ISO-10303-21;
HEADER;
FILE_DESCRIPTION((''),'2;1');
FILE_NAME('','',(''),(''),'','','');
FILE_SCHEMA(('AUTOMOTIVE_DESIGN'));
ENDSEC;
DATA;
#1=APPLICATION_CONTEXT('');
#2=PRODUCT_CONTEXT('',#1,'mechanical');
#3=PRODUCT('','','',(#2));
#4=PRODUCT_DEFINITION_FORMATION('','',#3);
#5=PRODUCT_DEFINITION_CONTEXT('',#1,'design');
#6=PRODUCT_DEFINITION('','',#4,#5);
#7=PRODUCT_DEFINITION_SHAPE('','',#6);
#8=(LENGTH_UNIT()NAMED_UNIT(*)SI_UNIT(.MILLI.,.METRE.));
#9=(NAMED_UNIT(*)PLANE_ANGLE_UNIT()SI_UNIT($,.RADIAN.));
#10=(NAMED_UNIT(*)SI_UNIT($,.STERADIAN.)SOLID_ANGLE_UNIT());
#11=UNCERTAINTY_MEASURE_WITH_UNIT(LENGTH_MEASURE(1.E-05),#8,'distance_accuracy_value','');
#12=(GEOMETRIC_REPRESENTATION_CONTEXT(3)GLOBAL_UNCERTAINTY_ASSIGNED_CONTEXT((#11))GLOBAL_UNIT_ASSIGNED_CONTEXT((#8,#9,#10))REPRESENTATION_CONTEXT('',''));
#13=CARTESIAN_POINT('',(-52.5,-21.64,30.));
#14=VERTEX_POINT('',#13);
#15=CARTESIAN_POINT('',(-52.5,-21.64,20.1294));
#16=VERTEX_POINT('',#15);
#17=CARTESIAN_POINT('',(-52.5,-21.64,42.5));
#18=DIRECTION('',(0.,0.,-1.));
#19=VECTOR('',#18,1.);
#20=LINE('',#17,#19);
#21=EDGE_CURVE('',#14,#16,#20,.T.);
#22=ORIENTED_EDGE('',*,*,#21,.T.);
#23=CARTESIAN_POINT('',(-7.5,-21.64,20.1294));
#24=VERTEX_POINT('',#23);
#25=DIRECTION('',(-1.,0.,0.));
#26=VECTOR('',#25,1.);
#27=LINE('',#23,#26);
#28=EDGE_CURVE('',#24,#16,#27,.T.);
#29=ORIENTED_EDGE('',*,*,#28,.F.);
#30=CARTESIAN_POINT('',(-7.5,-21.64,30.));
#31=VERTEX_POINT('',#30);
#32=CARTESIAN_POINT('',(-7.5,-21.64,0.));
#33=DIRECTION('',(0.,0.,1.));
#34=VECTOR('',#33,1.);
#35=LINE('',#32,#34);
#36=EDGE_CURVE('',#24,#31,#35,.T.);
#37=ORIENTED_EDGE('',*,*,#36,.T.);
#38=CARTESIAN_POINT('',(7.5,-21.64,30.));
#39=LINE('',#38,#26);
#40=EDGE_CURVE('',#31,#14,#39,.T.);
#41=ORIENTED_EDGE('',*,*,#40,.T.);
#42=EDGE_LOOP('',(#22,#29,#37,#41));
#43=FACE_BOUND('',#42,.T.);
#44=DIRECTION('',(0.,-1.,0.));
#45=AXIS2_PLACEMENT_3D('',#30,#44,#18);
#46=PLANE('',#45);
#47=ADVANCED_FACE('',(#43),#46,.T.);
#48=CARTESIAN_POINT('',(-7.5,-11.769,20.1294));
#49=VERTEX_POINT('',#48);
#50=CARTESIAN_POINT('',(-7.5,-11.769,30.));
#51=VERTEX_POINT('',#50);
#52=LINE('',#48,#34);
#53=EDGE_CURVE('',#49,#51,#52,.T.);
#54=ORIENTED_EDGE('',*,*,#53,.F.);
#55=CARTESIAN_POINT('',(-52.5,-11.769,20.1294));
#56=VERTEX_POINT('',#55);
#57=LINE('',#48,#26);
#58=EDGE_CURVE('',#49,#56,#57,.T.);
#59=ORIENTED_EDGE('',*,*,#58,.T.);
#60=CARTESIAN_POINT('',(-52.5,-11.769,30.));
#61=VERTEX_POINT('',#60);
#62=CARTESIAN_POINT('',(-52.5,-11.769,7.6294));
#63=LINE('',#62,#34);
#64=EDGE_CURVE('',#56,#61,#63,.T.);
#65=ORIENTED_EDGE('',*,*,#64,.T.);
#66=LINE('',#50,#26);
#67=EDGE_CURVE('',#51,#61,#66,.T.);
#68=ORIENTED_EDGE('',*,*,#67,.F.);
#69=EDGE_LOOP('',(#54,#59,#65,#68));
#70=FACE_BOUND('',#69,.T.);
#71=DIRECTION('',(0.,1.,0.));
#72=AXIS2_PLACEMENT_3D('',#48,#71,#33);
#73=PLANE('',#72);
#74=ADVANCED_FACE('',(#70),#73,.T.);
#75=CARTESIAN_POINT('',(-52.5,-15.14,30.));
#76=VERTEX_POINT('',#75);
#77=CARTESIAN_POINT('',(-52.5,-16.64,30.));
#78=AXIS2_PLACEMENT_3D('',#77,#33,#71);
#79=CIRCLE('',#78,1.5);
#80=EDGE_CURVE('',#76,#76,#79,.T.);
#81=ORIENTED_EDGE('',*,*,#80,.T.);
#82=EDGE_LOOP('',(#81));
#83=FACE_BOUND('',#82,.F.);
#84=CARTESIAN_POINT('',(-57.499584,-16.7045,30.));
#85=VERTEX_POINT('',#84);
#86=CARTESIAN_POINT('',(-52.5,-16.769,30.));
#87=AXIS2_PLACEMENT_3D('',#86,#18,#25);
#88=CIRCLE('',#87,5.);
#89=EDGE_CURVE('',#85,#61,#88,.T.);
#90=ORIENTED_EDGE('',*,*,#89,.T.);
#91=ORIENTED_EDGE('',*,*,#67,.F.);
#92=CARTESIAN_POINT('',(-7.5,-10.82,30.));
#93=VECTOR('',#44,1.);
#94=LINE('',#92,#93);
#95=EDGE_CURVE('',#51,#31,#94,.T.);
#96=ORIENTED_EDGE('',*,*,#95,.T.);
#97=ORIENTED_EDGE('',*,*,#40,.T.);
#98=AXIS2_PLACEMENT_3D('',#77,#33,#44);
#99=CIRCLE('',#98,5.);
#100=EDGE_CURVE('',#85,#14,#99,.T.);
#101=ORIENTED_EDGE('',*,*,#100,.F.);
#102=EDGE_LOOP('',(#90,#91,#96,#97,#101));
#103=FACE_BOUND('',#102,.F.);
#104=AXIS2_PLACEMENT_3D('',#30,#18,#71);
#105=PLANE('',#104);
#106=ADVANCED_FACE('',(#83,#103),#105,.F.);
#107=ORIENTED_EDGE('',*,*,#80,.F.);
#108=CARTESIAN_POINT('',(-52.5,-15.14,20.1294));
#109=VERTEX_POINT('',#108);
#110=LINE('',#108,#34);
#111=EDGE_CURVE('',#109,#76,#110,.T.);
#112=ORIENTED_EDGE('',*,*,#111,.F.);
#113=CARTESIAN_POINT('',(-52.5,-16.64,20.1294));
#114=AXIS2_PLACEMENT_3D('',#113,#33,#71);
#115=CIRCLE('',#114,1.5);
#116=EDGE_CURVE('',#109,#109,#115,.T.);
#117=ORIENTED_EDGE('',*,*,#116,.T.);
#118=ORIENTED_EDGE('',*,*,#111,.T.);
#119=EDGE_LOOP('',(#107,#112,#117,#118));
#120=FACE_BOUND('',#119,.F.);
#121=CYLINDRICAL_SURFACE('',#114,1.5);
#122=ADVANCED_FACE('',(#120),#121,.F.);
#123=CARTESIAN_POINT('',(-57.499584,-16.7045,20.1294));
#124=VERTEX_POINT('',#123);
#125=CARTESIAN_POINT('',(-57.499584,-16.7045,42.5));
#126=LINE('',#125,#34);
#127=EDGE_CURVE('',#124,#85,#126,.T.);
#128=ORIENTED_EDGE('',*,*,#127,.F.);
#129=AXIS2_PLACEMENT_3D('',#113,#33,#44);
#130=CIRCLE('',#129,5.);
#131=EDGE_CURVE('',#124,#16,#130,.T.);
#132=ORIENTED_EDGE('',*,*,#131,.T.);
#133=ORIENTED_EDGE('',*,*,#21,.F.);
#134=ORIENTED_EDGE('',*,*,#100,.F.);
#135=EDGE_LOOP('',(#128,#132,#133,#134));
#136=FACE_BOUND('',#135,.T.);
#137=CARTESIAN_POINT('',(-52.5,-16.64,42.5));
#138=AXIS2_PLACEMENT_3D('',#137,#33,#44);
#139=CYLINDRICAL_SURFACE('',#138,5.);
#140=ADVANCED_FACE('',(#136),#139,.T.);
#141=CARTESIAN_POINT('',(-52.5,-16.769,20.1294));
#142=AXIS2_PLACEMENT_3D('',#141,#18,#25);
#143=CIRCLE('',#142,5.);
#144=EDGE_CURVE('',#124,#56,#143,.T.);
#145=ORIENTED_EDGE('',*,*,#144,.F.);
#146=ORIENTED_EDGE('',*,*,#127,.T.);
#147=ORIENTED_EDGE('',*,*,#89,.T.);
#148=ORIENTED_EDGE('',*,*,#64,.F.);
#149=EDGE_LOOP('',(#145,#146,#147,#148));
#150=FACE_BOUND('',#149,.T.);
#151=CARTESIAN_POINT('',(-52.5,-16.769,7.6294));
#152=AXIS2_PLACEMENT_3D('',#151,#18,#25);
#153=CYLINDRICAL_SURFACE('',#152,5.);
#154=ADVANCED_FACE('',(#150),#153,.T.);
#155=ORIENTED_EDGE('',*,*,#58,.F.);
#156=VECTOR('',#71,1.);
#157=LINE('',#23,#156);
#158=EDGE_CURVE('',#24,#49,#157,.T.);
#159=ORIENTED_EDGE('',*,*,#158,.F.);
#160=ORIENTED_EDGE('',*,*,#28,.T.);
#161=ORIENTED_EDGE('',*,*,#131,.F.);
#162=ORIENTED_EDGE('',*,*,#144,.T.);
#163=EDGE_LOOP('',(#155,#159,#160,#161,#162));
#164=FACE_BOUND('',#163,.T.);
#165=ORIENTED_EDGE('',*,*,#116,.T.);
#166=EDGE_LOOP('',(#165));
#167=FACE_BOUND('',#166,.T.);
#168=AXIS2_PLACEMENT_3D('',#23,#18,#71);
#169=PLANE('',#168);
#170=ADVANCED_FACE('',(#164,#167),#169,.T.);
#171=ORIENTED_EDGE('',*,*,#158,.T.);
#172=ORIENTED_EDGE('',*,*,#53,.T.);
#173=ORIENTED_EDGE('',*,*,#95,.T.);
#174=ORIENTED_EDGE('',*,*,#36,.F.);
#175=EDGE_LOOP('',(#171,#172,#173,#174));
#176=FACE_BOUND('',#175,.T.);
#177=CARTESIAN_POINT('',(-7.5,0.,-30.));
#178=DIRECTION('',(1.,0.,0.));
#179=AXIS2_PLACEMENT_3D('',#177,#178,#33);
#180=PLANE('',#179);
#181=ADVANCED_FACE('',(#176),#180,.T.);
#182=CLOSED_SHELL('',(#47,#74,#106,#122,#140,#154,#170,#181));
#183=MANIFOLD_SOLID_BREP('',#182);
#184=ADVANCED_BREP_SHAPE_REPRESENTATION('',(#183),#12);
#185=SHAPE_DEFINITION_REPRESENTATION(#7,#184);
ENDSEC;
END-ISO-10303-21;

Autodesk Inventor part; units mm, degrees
ref_plane "YZ Plane" through (0, 0, 0) normal (1, 0, 0) x (0, 1, 0)
ref_plane "XZ Plane" through (0, 0, 0) normal (0, 1, 0) x (-1, 0, 0)
ref_plane "XY Plane" through (0, 0, 0) normal (0, 0, 1) x (1, 0, 0)
sketch "Sketch1" plane through (0, 0, 0) normal (0, 1, 0) x (-1, 0, 0)
  line L0 (-7.5, -30) -> (7.5, -30)
  line L1 (7.5, -30) -> (7.5, 30)
  line L2 (7.5, 30) -> (-7.5, 30)
  line L3 (-7.5, 30) -> (-7.5, -30)
  line L4 (-7.5, -30) -> (7.5, 30) construction
  line L5 (7.5, -30) -> (-7.5, 30) construction
  point P0 (0, 0)
  dimension "d0" = 15
  dimension "d1" = 60
extrude "Extrusion1" add sketch "Sketch1" along normal blind 3
sketch "Sketch2" plane through (0, 3, 0) normal (0, 1, 0) x (1, 0, 0)
  line L0 (-7.5, 30) -> (-7.5, -30) projected
  line L1 (7.5, 20.5) -> (-7.5, 20.5)
  line L2 (-7.5, 20.5) -> (-7.5, -20.5)
  line L3 (-7.5, -20.5) -> (7.5, -20.5)
  line L4 (7.5, -20.5) -> (7.5, 20.5)
  line L5 (7.5, 20.5) -> (-7.5, -20.5) construction
  line L6 (-7.5, 20.5) -> (7.5, -20.5) construction
  line L7 (7.5, -20.5) -> (-7.5, -20.5)
  line L8 (-7.5, -20.5) -> (-7.5, -30)
  line L9 (-7.5, -30) -> (7.5, -30)
  line L10 (7.5, -30) -> (7.5, -20.5)
  line L11 (7.5, 30) -> (-7.5, 30) projected
  line L12 (7.5, 20.5) -> (-7.5, 20.5)
  line L13 (-7.5, 20.5) -> (-7.5, 30)
  line L14 (-7.5, 30) -> (7.5, 30)
  line L15 (7.5, 30) -> (7.5, 20.5)
  point P0 (0, 0)
  dimension "d4" = 41
extrude "Extrusion2" add sketch "Sketch2" along normal blind 19 contours L11 L15 L1 L0 | L3 L10 L9 L0
sketch "Sketch3" plane through (-7.5, 0, -30) normal (-1, 0, 0) x (0, 0, 1)
  line L0 (60, 0) -> (0, 0) projected
  line L1 (60, 0) -> (50, 0)
  line L2 (50, 0) -> (50, -21.64)
  line L3 (50, -21.64) -> (60, -21.64)
  line L4 (60, -21.64) -> (60, 0)
  point P0 (30, 0)
  dimension "d7" = 10
  dimension "d8" = 21.64
extrude "Extrusion3" add sketch "Sketch3" against normal blind 15
sketch "Sketch5" plane through (-7.5, 0, -30) normal (-1, 0, 0) x (0, 0, 1)
  line L0 (0, 0) -> (50, 0) projected
  line L1 (28.3595, 0) -> (50, -21.6405)
  line L2 (50, -21.64) -> (50, 0) projected
  line L3 (28.3595, 0) -> (58.9638, 0) construction
  line L4 (50, -21.6405) -> (50, 0)
  line L5 (50, 0) -> (28.3595, 0)
  point P0 (30, 0)
  dimension "d15" = 45
extrude "Extrusion5" add sketch "Sketch5" against normal blind 15
sketch "Sketch6" plane through (-7.5, 0, -30) normal (-1, 0, 0) x (0, 0, 1)
  line L0 (60, -21.64) -> (60, 22) projected
  line L1 (60, -21.64) -> (50.1294, -21.64)
  line L2 (50.1294, -21.64) -> (50.1294, -11.769)
  line L3 (50.1294, -11.769) -> (60, -11.769)
  line L4 (60, -11.769) -> (60, -21.64)
  point P0 (30, 0)
  dimension "d18" = 9.871
extrude "Extrusion6" add sketch "Sketch6" along normal blind 50
sketch "Sketch7" plane through (-7.5, 22, 30) normal (0, 0, 1) x (1, 0, 0)
  point P0 (7.5, -22)
fillet "Fillet1" radius 5 2 edges at (-57.5, -21.64, 25.0647) (-57.5, -11.769, 25.0647)
sketch "Sketch8" plane through (-7.5, -21.64, 20.1294) normal (0, 0, -1) x (-1, 0, 0)
  arc A0 (45, 0) -> (50, 5) centre (45, 5) ccw projected
  point P0 (-7.5, 21.64)
hole "Hole1" at (-52.5, -16.64, 20.1294) direction (0, 0, 1) diameter 3 end through all
ref_plane "Work Plane1" through (-7.5, 0, -30) normal (-1, 0, 0) x (0, 0, 1)
split "Split1" plane through (-7.5, 0, -30) removes the side toward (1, 0, 0)
properties part number "TurretServoSupport_A" material "PC/ABS Plastic"
